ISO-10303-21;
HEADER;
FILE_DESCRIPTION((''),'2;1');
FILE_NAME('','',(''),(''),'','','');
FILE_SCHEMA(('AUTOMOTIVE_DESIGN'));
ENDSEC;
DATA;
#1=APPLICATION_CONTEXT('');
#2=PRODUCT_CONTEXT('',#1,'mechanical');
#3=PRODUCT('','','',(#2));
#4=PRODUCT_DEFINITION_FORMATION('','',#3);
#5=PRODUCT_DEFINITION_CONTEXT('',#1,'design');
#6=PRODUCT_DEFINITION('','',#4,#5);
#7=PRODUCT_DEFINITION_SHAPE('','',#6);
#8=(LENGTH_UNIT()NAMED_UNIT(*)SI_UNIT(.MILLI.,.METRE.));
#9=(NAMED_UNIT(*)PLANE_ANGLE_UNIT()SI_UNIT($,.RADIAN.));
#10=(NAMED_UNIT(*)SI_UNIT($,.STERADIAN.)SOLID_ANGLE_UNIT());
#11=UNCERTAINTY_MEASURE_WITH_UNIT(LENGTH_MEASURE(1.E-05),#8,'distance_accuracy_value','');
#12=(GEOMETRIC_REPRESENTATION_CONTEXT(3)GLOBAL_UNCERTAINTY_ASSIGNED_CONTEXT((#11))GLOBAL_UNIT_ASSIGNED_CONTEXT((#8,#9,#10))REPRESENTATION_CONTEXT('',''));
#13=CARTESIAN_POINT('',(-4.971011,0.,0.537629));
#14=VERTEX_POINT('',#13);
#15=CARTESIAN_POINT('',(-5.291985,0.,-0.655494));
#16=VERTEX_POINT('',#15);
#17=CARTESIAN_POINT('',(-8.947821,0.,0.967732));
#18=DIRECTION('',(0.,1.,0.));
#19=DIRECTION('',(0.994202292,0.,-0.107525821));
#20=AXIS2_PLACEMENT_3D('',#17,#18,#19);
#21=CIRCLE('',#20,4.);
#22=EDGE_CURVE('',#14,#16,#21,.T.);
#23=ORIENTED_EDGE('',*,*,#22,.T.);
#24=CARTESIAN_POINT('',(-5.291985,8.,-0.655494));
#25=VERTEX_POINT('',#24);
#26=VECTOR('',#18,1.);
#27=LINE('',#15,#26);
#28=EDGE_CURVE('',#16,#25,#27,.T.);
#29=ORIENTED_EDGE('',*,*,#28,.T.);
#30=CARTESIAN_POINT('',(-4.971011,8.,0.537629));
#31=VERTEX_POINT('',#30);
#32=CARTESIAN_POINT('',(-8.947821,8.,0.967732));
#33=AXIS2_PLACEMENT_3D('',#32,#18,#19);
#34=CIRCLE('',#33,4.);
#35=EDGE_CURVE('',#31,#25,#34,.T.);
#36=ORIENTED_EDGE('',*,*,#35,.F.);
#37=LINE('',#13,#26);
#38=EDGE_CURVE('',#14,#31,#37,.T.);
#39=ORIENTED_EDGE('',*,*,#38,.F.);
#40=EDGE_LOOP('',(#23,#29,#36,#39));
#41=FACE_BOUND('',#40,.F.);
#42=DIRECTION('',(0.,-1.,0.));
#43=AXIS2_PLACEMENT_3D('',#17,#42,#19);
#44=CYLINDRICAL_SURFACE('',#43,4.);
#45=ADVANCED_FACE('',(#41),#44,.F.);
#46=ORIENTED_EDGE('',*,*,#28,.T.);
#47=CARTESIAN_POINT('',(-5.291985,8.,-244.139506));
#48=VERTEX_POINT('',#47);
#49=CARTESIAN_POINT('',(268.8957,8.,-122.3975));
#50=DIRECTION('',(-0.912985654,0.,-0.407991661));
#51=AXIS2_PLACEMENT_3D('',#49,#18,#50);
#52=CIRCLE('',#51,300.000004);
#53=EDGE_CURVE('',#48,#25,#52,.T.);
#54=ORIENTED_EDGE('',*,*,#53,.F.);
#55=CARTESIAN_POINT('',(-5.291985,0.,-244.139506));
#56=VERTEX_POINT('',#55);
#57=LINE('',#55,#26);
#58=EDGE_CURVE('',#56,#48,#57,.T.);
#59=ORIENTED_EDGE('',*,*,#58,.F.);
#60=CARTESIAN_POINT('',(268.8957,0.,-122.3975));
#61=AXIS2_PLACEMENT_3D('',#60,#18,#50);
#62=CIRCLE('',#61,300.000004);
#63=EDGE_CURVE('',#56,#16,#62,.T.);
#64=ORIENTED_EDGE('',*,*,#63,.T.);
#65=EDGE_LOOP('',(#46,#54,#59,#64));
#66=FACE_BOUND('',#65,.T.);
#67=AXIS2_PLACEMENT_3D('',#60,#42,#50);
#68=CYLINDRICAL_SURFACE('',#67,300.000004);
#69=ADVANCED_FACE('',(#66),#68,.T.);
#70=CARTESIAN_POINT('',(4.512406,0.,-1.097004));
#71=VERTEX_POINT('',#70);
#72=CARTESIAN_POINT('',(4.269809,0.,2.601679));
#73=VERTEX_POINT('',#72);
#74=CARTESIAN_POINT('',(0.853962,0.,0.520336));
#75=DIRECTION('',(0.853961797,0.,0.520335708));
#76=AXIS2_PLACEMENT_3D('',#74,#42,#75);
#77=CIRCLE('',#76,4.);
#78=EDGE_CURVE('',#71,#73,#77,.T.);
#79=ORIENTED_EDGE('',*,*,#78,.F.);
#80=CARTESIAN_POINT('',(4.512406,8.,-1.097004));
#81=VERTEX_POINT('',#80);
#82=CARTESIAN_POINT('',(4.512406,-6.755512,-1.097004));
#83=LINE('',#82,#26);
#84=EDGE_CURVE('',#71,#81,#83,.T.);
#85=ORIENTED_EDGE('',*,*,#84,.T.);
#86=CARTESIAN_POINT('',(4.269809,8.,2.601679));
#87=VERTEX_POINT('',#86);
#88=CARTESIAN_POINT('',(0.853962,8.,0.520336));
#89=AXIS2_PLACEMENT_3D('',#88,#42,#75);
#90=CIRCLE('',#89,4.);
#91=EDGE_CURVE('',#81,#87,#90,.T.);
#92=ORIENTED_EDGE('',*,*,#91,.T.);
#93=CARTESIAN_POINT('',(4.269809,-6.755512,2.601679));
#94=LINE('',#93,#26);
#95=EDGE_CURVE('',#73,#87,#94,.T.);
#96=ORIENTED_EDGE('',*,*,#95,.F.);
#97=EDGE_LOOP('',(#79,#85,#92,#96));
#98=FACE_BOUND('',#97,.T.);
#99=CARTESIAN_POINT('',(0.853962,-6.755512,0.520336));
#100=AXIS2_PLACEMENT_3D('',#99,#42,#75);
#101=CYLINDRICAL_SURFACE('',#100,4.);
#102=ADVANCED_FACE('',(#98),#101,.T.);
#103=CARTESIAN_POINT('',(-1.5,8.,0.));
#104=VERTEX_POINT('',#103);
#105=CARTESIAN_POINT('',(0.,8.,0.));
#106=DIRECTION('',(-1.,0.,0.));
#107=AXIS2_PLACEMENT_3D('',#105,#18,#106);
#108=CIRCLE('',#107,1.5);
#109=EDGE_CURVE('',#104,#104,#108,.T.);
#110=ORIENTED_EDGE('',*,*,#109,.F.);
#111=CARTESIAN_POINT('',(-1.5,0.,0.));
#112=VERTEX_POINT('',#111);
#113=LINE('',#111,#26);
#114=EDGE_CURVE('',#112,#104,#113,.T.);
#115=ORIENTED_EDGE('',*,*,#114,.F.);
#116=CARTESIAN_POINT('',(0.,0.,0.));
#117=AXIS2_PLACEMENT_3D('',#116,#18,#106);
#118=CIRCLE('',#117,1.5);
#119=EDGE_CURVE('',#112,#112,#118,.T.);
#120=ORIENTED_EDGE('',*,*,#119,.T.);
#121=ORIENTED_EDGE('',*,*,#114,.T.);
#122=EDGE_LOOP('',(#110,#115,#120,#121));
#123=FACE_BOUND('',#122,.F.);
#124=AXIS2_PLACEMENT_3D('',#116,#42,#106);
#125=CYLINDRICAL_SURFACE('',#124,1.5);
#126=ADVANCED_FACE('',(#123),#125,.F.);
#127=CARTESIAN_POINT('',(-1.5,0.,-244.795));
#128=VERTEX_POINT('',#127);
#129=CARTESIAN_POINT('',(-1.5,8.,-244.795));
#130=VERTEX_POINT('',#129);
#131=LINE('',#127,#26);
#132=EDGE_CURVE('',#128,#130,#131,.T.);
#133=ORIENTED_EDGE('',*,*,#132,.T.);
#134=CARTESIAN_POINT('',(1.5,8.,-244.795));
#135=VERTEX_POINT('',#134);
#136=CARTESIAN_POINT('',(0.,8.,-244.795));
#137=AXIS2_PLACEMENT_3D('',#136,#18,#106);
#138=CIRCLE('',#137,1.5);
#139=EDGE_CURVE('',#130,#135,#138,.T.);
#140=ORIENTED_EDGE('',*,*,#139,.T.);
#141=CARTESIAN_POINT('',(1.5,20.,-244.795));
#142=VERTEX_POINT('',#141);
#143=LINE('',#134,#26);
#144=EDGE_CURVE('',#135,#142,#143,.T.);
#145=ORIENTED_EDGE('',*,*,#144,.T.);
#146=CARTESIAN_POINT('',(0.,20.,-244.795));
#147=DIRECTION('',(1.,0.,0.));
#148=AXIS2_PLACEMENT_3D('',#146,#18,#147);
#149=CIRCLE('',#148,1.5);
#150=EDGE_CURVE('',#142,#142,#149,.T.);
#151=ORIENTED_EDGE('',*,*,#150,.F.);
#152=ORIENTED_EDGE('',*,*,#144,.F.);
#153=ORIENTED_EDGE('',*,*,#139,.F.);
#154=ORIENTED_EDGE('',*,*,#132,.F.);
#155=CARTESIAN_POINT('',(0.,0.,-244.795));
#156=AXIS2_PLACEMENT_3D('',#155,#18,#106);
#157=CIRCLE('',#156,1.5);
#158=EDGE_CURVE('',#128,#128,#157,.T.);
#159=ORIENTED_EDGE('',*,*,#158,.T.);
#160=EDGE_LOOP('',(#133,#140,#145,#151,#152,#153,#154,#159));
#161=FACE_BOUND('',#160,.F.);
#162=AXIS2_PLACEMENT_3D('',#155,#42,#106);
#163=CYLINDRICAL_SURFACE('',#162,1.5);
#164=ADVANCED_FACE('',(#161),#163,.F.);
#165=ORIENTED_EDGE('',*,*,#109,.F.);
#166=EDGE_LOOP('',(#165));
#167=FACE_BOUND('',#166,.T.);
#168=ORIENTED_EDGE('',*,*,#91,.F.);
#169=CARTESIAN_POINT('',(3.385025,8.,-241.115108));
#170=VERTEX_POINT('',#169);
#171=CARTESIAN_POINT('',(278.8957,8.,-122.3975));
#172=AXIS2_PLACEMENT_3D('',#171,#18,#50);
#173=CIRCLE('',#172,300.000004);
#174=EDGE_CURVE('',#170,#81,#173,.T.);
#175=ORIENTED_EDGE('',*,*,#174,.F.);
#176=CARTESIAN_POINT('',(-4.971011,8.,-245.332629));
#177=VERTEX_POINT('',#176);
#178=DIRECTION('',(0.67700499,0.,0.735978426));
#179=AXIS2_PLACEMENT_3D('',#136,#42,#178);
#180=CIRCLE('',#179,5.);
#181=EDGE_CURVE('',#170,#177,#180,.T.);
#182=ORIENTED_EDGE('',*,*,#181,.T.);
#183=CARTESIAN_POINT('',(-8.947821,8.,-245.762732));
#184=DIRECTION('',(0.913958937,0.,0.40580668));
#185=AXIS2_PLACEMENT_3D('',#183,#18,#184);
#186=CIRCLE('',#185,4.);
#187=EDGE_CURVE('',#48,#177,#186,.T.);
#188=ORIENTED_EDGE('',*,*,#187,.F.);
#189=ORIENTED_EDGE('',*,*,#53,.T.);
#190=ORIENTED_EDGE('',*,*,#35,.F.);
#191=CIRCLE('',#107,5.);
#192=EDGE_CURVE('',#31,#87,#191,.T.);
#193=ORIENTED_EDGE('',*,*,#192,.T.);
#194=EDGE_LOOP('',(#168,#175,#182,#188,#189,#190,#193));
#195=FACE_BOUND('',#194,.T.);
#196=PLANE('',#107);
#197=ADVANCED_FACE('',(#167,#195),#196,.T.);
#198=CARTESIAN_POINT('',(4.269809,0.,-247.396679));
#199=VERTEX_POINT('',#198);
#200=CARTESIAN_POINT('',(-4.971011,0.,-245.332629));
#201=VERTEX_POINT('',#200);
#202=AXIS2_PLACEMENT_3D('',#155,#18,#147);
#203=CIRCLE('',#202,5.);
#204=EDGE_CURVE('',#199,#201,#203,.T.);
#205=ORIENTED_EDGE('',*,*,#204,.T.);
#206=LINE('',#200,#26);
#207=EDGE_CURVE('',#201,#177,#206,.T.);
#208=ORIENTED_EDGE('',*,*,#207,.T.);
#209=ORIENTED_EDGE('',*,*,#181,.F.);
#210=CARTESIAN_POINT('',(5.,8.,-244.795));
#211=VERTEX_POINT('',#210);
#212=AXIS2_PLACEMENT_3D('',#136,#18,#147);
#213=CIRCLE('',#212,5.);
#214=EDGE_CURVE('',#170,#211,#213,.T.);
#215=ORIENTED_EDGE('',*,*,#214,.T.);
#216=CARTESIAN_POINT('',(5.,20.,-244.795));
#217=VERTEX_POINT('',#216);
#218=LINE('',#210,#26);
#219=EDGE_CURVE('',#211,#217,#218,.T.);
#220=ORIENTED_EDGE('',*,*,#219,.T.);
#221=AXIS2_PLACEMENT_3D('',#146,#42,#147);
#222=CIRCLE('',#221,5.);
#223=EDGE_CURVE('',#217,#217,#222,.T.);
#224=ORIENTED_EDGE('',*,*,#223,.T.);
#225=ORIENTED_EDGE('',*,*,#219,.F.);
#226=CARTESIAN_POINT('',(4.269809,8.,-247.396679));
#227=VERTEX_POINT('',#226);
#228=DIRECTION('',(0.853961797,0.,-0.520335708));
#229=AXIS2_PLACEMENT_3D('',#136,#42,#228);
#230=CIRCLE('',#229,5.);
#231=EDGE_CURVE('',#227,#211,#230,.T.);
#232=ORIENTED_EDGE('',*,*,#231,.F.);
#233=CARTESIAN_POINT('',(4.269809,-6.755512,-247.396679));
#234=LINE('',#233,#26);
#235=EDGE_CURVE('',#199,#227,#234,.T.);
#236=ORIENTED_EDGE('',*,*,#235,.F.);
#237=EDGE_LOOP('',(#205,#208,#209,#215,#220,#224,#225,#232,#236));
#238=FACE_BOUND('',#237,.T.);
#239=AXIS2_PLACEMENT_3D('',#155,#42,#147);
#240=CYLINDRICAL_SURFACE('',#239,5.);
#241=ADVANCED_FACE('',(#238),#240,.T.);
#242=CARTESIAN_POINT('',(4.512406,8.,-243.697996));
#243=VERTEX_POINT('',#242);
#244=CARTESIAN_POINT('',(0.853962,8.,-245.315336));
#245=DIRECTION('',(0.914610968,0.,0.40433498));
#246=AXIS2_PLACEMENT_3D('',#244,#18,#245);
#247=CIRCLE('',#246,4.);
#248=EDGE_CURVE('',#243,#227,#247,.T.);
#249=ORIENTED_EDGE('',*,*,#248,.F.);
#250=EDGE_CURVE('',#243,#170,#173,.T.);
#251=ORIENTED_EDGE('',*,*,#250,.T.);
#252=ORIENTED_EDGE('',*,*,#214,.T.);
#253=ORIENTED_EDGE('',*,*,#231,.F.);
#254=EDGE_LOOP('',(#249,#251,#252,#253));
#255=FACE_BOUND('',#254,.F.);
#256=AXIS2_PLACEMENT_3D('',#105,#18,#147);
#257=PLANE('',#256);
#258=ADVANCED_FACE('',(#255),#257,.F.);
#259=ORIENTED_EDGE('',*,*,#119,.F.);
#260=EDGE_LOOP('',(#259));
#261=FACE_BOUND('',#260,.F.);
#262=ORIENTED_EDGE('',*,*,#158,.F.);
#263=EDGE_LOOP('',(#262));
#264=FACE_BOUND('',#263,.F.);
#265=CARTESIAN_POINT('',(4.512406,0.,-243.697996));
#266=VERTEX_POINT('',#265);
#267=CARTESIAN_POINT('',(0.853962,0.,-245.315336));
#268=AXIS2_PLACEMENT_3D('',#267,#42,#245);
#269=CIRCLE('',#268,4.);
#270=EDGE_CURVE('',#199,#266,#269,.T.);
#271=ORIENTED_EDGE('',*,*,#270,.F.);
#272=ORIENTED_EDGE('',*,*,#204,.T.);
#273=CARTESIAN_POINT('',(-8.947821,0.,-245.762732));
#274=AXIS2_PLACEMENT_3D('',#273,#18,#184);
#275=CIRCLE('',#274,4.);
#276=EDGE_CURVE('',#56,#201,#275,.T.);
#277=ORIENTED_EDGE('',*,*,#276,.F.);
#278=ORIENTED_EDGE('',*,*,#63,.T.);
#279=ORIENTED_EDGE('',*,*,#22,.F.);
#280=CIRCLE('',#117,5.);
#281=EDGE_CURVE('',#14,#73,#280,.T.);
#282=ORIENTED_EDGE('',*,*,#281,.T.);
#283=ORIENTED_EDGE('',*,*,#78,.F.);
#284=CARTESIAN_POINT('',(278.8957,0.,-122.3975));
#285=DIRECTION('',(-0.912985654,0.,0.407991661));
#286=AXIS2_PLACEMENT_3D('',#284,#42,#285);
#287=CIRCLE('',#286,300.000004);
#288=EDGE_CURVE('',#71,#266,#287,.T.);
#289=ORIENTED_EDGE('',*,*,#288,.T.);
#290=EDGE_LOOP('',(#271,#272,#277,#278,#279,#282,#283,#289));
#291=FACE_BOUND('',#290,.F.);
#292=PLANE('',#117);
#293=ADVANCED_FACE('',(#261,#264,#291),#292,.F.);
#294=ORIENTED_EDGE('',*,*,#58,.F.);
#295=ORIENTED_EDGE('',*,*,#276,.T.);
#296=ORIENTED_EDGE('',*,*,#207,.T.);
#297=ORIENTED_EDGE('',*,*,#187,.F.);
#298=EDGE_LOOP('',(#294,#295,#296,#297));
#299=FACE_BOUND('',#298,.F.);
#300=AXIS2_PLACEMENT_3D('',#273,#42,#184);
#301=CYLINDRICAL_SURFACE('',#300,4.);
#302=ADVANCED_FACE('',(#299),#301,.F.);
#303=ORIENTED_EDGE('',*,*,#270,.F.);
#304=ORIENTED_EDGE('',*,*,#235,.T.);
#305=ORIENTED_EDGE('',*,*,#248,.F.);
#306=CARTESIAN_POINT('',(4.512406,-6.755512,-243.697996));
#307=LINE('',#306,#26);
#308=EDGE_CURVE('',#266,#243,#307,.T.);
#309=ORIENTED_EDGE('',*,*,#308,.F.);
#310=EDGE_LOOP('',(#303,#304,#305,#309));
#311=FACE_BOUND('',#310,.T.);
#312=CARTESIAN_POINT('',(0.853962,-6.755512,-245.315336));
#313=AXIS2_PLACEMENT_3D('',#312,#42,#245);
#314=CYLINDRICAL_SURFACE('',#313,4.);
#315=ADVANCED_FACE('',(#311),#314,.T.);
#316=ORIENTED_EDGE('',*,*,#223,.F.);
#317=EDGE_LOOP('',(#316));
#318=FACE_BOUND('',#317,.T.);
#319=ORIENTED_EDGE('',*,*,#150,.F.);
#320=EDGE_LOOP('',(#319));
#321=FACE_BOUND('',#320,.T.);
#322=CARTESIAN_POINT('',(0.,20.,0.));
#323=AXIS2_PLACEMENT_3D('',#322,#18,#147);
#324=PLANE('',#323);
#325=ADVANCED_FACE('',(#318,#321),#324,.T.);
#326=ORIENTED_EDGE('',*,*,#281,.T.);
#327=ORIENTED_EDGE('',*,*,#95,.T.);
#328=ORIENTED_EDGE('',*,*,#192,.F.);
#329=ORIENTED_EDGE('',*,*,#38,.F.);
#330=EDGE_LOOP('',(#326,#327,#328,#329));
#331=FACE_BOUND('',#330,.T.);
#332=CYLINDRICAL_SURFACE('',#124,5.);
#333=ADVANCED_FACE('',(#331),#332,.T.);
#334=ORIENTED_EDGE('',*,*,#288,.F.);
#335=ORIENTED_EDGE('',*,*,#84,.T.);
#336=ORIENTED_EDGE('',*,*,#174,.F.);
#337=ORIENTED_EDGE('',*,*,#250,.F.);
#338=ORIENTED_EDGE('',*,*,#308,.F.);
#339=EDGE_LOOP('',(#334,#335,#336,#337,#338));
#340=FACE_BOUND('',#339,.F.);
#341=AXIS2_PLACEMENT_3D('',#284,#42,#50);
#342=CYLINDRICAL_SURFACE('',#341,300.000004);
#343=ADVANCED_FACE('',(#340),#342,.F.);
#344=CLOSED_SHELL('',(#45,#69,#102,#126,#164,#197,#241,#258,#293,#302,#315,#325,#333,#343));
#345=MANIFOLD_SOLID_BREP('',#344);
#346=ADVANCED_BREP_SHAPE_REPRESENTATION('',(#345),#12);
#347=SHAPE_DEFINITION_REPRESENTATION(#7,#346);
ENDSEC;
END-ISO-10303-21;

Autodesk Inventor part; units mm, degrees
ref_plane "YZ Plane" through (0, 0, 0) normal (1, 0, 0) x (0, 1, 0)
ref_plane "XZ Plane" through (0, 0, 0) normal (0, 1, 0) x (-1, 0, 0)
ref_plane "XY Plane" through (0, 0, 0) normal (0, 0, 1) x (1, 0, 0)
sketch "Sketch1" plane through (0, 0, 0) normal (0, 1, 0) x (-1, 0, 0)
  line L0 (0, 0) -> (0, -244.795) construction
  line L1 (-5, 0) -> (-5, -244.795)
  line L2 (5, -244.795) -> (5, 0)
  arc A0 (5, 0) -> (-5, 0) centre (0, 0) ccw
  arc A1 (-5, -244.795) -> (5, -244.795) centre (0, -244.795) ccw
  circle A2 centre (0, 0) radius 1.5
  circle A3 centre (0, -244.795) radius 1.5
  arc A4 (-5, -244.795) -> (-5, 0) centre (-278.8957, -122.3975) ccw
  arc A5 (5, -244.795) -> (5, 0) centre (-268.8957, -122.3975) ccw
  point P0 (0, -122.3975)
  dimension "d0" = 244.795
  dimension "d1" = 10
  dimension "d2" = 3
  dimension "d3" = 3
  dimension "d18" = 300
  dimension "d19" = 300
extrude "Extrusion1" add sketch "Sketch1" along normal blind 8 contours A0 L2 A4 | A4 L2 A1 | A5 L2 A4
sketch "Sketch2" plane through (0, 8, 0) normal (0, 1, 0) x (1, 0, 0)
  arc A0 (5, 244.795) -> (-5, 244.795) centre (0, 244.795) ccw projected
  arc A1 (-5, 0) -> (5, 0) centre (0, 0) ccw projected
  circle A2 centre (0, 244.795) radius 1.5 projected
  circle A3 centre (0, 0) radius 1.5 projected
  circle A4 centre (0, 244.795) radius 5
  arc A5 (-5, 244.795) -> (-5, 0) centre (268.8957, 122.3975) ccw projected
  arc A6 (5, 244.795) -> (5, 0) centre (278.8957, 122.3975) ccw projected
  point P0 (-5, 244.795)
  point P1 (5, 244.795)
  dimension "d12" = 10
extrude "Extrusion2" add sketch "Sketch2" along normal blind 12 contours A6 A4 A0 | A4 A6
fillet "Fillet1" radius 4 4 edges at (5, 4, -244.795) (-5, 4, -244.795) (5, 4, 0) (-5, 4, 0)
sketch "Sketch3" plane through (0, 0, 0) normal (0, -1, 0) x (1, 0, 0)
  arc A0 (-4.971, -245.3326) -> (4.2698, -247.3967) centre (0, -244.795) ccw projected
  arc A1 (4.2698, 2.6017) -> (-4.971, 0.5376) centre (0, 0) ccw projected
  circle A2 centre (0, -244.795) radius 1.5 projected
  circle A3 centre (0, 0) radius 1.5 projected
  arc A4 (-5.292, -0.6555) -> (-5.292, -244.1395) centre (268.8957, -122.3975) ccw projected
  arc A5 (4.5124, -1.097) -> (4.5124, -243.698) centre (278.8957, -122.3975) ccw projected
  arc A6 (4.5124, -1.097) -> (4.2698, 2.6017) centre (0.854, 0.5203) ccw projected
  arc A7 (-5.292, -0.6555) -> (-4.971, 0.5376) centre (-8.9478, 0.9677) ccw projected
  arc A8 (-4.971, -245.3326) -> (-5.292, -244.1395) centre (-8.9478, -245.7627) ccw projected
  arc A9 (4.2698, -247.3967) -> (4.5124, -243.698) centre (0.854, -245.3153) ccw projected
